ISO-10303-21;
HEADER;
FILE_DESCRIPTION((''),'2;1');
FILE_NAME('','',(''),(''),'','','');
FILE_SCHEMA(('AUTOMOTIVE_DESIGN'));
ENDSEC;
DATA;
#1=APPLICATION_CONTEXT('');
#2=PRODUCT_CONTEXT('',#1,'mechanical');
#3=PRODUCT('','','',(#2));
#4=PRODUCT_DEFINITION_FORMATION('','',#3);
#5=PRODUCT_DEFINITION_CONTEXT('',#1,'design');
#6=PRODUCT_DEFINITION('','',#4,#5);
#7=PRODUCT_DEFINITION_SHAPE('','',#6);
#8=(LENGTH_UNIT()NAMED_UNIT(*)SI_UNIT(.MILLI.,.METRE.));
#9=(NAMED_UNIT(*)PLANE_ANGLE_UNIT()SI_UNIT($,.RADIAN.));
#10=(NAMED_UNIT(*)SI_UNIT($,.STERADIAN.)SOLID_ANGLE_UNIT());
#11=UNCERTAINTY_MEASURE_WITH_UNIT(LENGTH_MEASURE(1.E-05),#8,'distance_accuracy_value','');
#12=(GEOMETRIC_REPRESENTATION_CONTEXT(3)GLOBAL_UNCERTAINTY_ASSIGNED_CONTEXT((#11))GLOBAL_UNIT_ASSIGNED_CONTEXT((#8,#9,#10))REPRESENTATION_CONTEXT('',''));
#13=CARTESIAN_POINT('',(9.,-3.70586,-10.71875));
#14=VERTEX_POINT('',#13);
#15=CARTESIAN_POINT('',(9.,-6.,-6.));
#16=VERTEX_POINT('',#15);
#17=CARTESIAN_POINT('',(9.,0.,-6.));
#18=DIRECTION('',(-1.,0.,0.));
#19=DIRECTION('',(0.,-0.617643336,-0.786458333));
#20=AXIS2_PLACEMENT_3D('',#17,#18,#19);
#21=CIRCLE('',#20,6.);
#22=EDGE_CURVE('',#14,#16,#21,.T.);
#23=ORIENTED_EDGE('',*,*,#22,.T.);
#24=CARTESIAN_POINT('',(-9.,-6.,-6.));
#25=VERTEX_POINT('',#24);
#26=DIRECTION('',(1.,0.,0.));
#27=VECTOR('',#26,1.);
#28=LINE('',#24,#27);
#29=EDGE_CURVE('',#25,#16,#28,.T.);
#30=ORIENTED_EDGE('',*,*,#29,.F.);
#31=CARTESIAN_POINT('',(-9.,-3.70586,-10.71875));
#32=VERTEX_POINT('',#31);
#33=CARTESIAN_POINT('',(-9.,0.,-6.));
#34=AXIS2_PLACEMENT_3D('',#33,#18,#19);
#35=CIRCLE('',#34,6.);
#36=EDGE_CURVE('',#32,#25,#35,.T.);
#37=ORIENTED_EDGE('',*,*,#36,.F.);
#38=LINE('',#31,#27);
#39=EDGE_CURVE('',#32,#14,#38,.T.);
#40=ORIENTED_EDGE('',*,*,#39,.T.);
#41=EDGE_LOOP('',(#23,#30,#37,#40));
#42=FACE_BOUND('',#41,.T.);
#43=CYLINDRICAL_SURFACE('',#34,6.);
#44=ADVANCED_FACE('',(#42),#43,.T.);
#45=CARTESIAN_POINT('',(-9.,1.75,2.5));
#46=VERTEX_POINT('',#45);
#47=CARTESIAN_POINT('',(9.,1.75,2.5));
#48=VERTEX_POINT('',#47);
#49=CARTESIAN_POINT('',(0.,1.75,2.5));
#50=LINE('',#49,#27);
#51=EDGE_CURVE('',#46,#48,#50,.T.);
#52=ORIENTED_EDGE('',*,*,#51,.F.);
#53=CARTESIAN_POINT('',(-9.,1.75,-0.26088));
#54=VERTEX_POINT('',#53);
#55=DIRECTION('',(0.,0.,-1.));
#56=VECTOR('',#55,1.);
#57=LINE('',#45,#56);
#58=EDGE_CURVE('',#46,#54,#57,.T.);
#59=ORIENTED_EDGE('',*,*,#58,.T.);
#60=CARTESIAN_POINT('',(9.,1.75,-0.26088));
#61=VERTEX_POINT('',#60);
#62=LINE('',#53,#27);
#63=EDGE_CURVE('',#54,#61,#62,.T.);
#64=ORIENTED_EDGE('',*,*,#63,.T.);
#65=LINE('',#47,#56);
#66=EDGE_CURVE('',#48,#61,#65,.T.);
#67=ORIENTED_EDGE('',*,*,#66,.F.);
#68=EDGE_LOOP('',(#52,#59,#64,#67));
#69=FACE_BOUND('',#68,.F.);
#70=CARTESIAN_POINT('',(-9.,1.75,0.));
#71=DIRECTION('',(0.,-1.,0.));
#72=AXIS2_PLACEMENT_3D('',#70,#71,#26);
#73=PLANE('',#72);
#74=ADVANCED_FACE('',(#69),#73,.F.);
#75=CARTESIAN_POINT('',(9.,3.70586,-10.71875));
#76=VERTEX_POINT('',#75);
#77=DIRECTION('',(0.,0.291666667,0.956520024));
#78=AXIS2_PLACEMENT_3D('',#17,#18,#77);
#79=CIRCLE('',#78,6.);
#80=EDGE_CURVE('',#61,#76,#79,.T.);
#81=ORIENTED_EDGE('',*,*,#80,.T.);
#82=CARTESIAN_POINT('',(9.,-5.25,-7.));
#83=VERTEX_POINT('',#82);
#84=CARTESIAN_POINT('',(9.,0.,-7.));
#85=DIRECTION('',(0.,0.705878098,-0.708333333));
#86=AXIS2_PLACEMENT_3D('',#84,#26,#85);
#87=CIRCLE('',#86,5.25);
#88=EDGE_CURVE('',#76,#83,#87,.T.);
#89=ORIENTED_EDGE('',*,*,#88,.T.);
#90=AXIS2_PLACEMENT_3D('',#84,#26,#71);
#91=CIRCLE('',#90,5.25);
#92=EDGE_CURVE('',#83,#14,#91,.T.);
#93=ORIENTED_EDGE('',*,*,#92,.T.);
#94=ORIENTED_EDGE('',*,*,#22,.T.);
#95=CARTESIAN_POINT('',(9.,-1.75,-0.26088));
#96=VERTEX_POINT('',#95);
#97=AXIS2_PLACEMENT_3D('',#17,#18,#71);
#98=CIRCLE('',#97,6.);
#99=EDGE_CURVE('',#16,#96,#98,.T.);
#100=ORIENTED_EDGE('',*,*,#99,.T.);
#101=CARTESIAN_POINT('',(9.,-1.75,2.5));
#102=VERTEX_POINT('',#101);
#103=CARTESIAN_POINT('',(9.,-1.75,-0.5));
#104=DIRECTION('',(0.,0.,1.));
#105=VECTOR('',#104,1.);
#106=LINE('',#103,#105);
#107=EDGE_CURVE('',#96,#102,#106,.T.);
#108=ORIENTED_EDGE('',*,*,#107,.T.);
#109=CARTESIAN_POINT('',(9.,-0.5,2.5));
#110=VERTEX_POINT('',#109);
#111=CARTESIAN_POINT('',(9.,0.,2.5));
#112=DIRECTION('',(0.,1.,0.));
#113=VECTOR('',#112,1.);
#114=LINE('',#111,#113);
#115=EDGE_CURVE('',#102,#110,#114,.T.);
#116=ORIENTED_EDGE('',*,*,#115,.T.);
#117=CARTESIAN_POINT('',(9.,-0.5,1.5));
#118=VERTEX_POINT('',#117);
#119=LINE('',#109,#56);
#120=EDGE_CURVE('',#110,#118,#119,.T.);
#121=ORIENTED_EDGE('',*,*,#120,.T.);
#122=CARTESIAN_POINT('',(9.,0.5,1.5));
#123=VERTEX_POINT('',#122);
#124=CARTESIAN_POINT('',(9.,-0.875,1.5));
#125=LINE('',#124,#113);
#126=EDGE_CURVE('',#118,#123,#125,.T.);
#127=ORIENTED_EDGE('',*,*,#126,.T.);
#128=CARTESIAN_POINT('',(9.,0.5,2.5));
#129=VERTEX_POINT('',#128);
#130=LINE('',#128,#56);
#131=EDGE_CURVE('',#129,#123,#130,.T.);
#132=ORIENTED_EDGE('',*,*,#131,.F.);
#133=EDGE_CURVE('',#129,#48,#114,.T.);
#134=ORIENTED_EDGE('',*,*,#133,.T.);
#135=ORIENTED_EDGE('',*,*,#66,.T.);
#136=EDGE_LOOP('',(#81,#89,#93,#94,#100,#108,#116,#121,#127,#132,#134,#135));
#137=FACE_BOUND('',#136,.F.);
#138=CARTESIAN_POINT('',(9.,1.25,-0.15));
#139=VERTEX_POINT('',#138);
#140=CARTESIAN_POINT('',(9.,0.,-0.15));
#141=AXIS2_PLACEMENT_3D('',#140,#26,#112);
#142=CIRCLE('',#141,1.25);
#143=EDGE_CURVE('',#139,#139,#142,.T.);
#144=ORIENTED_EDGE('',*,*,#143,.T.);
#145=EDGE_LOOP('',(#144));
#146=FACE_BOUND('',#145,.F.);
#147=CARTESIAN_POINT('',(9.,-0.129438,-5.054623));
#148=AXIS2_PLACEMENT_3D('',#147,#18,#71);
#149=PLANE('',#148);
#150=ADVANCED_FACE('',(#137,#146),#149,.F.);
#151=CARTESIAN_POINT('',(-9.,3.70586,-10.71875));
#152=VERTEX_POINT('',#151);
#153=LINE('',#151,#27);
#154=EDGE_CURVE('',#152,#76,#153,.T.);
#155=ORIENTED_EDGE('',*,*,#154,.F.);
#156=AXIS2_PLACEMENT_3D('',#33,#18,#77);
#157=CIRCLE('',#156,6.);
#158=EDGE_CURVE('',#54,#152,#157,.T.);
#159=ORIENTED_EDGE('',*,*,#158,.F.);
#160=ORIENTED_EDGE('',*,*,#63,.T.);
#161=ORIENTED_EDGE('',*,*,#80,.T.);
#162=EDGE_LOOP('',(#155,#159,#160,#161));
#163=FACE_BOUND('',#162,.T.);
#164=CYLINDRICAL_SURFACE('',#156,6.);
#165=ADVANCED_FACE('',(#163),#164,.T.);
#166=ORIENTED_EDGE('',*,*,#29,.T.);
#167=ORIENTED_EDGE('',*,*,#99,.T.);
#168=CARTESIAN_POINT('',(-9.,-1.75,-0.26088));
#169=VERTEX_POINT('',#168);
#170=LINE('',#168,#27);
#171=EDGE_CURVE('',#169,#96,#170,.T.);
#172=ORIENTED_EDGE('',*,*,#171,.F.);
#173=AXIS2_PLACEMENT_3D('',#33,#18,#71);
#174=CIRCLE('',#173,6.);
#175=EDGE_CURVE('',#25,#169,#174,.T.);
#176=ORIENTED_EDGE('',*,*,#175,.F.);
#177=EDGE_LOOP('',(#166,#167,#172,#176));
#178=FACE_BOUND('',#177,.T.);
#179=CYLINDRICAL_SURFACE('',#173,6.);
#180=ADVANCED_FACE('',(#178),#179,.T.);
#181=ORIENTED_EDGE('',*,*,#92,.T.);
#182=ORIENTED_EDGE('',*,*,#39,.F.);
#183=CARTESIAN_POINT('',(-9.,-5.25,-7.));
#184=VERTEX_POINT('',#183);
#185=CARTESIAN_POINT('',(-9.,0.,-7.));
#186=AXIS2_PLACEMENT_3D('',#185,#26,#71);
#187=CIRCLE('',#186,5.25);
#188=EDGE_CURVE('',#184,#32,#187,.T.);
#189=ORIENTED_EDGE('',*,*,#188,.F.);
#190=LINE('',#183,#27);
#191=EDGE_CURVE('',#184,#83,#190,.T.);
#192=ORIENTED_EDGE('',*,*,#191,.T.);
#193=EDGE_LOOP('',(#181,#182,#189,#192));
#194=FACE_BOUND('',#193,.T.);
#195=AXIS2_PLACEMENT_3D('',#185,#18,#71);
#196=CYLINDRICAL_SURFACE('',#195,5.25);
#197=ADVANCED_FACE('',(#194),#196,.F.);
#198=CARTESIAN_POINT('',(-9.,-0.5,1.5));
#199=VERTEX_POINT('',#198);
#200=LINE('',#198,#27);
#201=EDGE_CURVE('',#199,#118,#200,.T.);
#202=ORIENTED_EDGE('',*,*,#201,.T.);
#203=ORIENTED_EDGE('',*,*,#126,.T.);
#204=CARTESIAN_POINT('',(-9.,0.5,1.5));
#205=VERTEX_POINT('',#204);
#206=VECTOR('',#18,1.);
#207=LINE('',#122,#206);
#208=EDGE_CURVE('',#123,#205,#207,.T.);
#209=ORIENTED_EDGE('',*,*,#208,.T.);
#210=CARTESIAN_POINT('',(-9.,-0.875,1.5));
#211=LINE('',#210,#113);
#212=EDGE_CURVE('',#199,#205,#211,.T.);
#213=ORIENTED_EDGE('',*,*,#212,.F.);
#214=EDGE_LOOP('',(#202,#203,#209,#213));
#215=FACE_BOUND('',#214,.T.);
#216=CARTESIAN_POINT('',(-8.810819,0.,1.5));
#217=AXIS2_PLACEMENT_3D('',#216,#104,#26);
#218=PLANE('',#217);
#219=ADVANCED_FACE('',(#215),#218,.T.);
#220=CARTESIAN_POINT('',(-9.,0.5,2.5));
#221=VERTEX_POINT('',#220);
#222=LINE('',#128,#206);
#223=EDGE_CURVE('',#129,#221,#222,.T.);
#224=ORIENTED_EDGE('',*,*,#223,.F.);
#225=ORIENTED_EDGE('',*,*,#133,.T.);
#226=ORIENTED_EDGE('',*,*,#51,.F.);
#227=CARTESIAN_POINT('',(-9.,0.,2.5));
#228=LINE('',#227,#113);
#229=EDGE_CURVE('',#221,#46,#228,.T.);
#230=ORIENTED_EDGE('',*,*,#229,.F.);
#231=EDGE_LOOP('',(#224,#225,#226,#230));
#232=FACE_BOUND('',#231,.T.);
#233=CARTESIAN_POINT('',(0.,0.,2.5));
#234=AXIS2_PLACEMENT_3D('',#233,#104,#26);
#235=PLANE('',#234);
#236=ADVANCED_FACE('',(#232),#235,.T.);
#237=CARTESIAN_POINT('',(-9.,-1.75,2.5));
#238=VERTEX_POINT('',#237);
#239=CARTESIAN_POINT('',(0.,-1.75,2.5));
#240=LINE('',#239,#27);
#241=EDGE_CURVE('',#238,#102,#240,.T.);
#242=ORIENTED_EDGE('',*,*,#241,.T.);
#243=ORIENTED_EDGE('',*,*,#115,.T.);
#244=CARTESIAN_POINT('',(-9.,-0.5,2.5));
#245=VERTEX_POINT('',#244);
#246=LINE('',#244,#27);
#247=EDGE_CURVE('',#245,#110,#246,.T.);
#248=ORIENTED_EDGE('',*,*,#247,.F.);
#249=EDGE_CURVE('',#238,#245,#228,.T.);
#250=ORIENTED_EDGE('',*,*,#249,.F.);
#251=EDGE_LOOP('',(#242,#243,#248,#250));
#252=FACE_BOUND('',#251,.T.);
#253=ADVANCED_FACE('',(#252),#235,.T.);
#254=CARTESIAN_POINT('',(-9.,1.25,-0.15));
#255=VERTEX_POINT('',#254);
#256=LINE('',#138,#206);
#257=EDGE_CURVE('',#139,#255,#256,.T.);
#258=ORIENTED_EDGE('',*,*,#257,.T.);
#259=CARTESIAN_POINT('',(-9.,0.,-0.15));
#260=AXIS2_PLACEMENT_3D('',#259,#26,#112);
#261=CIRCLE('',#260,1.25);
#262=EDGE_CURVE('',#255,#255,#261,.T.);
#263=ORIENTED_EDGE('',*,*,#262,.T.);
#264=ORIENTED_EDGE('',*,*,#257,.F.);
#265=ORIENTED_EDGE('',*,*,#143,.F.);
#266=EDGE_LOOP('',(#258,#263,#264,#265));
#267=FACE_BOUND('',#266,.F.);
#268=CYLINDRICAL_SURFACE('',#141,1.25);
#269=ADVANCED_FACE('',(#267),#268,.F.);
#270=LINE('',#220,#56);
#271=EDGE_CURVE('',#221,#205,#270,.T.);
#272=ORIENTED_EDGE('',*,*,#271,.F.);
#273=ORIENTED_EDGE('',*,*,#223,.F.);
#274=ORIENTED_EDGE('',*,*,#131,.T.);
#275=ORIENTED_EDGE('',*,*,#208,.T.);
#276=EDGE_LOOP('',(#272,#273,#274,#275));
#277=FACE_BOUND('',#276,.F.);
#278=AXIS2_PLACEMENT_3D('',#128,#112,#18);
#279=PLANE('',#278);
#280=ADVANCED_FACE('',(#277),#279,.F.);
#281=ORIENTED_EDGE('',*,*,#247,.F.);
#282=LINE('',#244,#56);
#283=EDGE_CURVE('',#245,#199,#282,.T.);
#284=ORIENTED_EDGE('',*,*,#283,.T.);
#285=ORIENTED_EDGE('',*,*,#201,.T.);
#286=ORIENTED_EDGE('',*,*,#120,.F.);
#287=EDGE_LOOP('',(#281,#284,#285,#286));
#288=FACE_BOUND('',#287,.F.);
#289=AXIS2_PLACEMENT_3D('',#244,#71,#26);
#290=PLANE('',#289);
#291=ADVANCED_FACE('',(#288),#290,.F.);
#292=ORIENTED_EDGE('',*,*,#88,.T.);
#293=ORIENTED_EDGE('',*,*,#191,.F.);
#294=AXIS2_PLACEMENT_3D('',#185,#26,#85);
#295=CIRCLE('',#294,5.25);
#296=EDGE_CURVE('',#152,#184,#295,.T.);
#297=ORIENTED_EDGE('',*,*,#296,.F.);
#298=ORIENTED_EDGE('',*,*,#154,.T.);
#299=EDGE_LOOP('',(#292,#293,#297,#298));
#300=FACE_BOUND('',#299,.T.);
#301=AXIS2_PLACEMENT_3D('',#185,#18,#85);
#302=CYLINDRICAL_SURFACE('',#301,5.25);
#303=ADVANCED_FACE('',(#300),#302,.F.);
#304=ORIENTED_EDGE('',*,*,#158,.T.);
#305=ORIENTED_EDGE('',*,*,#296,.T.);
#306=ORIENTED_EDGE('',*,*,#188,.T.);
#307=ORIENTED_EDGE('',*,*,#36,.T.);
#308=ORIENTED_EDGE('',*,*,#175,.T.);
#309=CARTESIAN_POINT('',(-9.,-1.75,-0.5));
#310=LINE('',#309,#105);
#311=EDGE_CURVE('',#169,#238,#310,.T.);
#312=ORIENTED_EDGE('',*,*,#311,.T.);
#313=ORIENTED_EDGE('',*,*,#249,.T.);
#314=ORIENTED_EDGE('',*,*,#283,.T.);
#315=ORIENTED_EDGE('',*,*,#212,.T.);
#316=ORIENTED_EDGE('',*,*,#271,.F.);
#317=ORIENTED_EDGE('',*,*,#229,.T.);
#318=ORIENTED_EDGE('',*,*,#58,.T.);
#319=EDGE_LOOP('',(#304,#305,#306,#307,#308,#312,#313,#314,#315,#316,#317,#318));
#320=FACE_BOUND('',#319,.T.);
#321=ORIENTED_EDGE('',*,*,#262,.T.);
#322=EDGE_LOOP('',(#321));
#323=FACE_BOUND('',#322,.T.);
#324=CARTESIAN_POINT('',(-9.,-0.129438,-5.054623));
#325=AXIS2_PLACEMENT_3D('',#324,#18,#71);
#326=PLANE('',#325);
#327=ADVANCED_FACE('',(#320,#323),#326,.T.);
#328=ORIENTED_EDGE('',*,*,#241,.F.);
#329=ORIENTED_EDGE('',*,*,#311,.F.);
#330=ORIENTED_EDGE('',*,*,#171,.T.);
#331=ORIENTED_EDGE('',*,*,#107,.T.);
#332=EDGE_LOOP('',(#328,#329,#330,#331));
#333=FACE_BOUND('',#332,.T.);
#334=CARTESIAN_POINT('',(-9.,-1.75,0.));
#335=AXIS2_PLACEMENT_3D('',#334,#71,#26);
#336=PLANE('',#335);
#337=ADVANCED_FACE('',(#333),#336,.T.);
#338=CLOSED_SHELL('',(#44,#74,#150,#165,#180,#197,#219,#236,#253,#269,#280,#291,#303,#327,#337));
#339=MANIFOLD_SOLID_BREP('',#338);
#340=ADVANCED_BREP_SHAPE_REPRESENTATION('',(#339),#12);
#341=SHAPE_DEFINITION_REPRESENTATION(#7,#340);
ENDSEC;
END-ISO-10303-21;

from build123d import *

# Parameters (mm, degrees)
F0_W     = 18
F0_H     = 3.5
F1_DEPTH = 2.5
F3_DEPTH = 1
F4_W     = 18
F4_H     = 3.5
F5_DEPTH = 0.5
F7_DEPTH = 18
F8_R     = 1.25
F9_DEPTH = 18.001


with BuildPart() as f1:
    # F0 (on Top) → F1 (new body)
    with BuildSketch(Plane.XY):
        Rectangle(F0_W, F0_H)
    extrude(amount=F1_DEPTH)

    # F2 (on face) → F3 (cut)
    with BuildSketch(Plane.XY.offset(2.5)):
        with BuildLine():
            ThreePointArc((-8.5, 0), (-8.6464466094, 0.3535533906), (-9, 0.5))
            Line((-9, 0.5), (-9, -0.5))
            ThreePointArc((-9, -0.5), (-8.6464466094, -0.3535533906), (-8.5, 0))
        make_face()
        with BuildLine():
            Line((9, 0.5), (-9, 0.5))
            ThreePointArc((-9, 0.5), (-8.6464466094, 0.3535533906), (-8.5, 0))
            ThreePointArc((-8.5, 0), (-8.6464466094, -0.3535533906), (-9, -0.5))
            Line((-9, -0.5), (9, -0.5))
            ThreePointArc((9, -0.5), (8.5, 0), (9, 0.5))
        make_face()
        with BuildLine():
            Line((-9, -0.5), (-9, 0.5))
            ThreePointArc((-9, 0.5), (-9.5, 0), (-9, -0.5))
        make_face()
        with BuildLine():
            ThreePointArc((9.5, 0), (9.3535533906, 0.3535533906), (9, 0.5))
            Line((9, 0.5), (9, -0.5))
            ThreePointArc((9, -0.5), (9.3535533906, -0.3535533906), (9.5, 0))
        make_face()
        with BuildLine():
            Line((9, -0.5), (9, 0.5))
            ThreePointArc((9, 0.5), (8.5, 0), (9, -0.5))
        make_face()
    extrude(amount=-F3_DEPTH, mode=Mode.SUBTRACT)

    # F4 (on face) → F5 (join)
    with BuildSketch(Plane(origin=(0, 0, 0), x_dir=(1, 0, 0), z_dir=(0, 0, -1))):
        Rectangle(F4_W, F4_H)
    extrude(amount=F5_DEPTH)

    # F6 (on face) → F7 (join)
    with BuildSketch(Plane(origin=(-9, 0, 0), x_dir=(0, -1, 0), z_dir=(-1, 0, 0))):
        with BuildLine():
            ThreePointArc((3.7058600132, -10.71875), (5.3960707964, -8.6234366698), (6, -6))
            ThreePointArc((6, -6), (4.8218253805, -2.4292857857), (1.75, -0.2608798584))
            Line((1.75, -0.2608798584), (1.75, -0.5))
            Line((1.75, -0.5), (-1.75, -0.5))
            Line((-1.75, -0.5), (-1.75, -0.2608798584))
            ThreePointArc((-1.75, -0.2608798584), (-5.897742288, -4.8969878041), (-3.7058600132, -10.71875))
            ThreePointArc((-3.7058600132, -10.71875), (-2.0132976594, -2.1513782851), (5.25, -7))
            ThreePointArc((5.25, -7), (4.8486217149, -9.0132976594), (3.7058600132, -10.71875))
        make_face()
        with BuildLine():
            Line((1.75, -0.5), (1.75, -0.2608798584))
            ThreePointArc((1.75, -0.2608798584), (0, 0), (-1.75, -0.2608798584))
            Line((-1.75, -0.2608798584), (-1.75, -0.5))
            Line((-1.75, -0.5), (1.75, -0.5))
        make_face()
    extrude(amount=-F7_DEPTH)

    # F8 (on face) → F9 (cut, through all)
    with BuildSketch(Plane.YZ.offset(9)):
        with Locations((0, -0.15)):
            Circle(F8_R)
    extrude(amount=-F9_DEPTH, mode=Mode.SUBTRACT)


solid = f1.part
